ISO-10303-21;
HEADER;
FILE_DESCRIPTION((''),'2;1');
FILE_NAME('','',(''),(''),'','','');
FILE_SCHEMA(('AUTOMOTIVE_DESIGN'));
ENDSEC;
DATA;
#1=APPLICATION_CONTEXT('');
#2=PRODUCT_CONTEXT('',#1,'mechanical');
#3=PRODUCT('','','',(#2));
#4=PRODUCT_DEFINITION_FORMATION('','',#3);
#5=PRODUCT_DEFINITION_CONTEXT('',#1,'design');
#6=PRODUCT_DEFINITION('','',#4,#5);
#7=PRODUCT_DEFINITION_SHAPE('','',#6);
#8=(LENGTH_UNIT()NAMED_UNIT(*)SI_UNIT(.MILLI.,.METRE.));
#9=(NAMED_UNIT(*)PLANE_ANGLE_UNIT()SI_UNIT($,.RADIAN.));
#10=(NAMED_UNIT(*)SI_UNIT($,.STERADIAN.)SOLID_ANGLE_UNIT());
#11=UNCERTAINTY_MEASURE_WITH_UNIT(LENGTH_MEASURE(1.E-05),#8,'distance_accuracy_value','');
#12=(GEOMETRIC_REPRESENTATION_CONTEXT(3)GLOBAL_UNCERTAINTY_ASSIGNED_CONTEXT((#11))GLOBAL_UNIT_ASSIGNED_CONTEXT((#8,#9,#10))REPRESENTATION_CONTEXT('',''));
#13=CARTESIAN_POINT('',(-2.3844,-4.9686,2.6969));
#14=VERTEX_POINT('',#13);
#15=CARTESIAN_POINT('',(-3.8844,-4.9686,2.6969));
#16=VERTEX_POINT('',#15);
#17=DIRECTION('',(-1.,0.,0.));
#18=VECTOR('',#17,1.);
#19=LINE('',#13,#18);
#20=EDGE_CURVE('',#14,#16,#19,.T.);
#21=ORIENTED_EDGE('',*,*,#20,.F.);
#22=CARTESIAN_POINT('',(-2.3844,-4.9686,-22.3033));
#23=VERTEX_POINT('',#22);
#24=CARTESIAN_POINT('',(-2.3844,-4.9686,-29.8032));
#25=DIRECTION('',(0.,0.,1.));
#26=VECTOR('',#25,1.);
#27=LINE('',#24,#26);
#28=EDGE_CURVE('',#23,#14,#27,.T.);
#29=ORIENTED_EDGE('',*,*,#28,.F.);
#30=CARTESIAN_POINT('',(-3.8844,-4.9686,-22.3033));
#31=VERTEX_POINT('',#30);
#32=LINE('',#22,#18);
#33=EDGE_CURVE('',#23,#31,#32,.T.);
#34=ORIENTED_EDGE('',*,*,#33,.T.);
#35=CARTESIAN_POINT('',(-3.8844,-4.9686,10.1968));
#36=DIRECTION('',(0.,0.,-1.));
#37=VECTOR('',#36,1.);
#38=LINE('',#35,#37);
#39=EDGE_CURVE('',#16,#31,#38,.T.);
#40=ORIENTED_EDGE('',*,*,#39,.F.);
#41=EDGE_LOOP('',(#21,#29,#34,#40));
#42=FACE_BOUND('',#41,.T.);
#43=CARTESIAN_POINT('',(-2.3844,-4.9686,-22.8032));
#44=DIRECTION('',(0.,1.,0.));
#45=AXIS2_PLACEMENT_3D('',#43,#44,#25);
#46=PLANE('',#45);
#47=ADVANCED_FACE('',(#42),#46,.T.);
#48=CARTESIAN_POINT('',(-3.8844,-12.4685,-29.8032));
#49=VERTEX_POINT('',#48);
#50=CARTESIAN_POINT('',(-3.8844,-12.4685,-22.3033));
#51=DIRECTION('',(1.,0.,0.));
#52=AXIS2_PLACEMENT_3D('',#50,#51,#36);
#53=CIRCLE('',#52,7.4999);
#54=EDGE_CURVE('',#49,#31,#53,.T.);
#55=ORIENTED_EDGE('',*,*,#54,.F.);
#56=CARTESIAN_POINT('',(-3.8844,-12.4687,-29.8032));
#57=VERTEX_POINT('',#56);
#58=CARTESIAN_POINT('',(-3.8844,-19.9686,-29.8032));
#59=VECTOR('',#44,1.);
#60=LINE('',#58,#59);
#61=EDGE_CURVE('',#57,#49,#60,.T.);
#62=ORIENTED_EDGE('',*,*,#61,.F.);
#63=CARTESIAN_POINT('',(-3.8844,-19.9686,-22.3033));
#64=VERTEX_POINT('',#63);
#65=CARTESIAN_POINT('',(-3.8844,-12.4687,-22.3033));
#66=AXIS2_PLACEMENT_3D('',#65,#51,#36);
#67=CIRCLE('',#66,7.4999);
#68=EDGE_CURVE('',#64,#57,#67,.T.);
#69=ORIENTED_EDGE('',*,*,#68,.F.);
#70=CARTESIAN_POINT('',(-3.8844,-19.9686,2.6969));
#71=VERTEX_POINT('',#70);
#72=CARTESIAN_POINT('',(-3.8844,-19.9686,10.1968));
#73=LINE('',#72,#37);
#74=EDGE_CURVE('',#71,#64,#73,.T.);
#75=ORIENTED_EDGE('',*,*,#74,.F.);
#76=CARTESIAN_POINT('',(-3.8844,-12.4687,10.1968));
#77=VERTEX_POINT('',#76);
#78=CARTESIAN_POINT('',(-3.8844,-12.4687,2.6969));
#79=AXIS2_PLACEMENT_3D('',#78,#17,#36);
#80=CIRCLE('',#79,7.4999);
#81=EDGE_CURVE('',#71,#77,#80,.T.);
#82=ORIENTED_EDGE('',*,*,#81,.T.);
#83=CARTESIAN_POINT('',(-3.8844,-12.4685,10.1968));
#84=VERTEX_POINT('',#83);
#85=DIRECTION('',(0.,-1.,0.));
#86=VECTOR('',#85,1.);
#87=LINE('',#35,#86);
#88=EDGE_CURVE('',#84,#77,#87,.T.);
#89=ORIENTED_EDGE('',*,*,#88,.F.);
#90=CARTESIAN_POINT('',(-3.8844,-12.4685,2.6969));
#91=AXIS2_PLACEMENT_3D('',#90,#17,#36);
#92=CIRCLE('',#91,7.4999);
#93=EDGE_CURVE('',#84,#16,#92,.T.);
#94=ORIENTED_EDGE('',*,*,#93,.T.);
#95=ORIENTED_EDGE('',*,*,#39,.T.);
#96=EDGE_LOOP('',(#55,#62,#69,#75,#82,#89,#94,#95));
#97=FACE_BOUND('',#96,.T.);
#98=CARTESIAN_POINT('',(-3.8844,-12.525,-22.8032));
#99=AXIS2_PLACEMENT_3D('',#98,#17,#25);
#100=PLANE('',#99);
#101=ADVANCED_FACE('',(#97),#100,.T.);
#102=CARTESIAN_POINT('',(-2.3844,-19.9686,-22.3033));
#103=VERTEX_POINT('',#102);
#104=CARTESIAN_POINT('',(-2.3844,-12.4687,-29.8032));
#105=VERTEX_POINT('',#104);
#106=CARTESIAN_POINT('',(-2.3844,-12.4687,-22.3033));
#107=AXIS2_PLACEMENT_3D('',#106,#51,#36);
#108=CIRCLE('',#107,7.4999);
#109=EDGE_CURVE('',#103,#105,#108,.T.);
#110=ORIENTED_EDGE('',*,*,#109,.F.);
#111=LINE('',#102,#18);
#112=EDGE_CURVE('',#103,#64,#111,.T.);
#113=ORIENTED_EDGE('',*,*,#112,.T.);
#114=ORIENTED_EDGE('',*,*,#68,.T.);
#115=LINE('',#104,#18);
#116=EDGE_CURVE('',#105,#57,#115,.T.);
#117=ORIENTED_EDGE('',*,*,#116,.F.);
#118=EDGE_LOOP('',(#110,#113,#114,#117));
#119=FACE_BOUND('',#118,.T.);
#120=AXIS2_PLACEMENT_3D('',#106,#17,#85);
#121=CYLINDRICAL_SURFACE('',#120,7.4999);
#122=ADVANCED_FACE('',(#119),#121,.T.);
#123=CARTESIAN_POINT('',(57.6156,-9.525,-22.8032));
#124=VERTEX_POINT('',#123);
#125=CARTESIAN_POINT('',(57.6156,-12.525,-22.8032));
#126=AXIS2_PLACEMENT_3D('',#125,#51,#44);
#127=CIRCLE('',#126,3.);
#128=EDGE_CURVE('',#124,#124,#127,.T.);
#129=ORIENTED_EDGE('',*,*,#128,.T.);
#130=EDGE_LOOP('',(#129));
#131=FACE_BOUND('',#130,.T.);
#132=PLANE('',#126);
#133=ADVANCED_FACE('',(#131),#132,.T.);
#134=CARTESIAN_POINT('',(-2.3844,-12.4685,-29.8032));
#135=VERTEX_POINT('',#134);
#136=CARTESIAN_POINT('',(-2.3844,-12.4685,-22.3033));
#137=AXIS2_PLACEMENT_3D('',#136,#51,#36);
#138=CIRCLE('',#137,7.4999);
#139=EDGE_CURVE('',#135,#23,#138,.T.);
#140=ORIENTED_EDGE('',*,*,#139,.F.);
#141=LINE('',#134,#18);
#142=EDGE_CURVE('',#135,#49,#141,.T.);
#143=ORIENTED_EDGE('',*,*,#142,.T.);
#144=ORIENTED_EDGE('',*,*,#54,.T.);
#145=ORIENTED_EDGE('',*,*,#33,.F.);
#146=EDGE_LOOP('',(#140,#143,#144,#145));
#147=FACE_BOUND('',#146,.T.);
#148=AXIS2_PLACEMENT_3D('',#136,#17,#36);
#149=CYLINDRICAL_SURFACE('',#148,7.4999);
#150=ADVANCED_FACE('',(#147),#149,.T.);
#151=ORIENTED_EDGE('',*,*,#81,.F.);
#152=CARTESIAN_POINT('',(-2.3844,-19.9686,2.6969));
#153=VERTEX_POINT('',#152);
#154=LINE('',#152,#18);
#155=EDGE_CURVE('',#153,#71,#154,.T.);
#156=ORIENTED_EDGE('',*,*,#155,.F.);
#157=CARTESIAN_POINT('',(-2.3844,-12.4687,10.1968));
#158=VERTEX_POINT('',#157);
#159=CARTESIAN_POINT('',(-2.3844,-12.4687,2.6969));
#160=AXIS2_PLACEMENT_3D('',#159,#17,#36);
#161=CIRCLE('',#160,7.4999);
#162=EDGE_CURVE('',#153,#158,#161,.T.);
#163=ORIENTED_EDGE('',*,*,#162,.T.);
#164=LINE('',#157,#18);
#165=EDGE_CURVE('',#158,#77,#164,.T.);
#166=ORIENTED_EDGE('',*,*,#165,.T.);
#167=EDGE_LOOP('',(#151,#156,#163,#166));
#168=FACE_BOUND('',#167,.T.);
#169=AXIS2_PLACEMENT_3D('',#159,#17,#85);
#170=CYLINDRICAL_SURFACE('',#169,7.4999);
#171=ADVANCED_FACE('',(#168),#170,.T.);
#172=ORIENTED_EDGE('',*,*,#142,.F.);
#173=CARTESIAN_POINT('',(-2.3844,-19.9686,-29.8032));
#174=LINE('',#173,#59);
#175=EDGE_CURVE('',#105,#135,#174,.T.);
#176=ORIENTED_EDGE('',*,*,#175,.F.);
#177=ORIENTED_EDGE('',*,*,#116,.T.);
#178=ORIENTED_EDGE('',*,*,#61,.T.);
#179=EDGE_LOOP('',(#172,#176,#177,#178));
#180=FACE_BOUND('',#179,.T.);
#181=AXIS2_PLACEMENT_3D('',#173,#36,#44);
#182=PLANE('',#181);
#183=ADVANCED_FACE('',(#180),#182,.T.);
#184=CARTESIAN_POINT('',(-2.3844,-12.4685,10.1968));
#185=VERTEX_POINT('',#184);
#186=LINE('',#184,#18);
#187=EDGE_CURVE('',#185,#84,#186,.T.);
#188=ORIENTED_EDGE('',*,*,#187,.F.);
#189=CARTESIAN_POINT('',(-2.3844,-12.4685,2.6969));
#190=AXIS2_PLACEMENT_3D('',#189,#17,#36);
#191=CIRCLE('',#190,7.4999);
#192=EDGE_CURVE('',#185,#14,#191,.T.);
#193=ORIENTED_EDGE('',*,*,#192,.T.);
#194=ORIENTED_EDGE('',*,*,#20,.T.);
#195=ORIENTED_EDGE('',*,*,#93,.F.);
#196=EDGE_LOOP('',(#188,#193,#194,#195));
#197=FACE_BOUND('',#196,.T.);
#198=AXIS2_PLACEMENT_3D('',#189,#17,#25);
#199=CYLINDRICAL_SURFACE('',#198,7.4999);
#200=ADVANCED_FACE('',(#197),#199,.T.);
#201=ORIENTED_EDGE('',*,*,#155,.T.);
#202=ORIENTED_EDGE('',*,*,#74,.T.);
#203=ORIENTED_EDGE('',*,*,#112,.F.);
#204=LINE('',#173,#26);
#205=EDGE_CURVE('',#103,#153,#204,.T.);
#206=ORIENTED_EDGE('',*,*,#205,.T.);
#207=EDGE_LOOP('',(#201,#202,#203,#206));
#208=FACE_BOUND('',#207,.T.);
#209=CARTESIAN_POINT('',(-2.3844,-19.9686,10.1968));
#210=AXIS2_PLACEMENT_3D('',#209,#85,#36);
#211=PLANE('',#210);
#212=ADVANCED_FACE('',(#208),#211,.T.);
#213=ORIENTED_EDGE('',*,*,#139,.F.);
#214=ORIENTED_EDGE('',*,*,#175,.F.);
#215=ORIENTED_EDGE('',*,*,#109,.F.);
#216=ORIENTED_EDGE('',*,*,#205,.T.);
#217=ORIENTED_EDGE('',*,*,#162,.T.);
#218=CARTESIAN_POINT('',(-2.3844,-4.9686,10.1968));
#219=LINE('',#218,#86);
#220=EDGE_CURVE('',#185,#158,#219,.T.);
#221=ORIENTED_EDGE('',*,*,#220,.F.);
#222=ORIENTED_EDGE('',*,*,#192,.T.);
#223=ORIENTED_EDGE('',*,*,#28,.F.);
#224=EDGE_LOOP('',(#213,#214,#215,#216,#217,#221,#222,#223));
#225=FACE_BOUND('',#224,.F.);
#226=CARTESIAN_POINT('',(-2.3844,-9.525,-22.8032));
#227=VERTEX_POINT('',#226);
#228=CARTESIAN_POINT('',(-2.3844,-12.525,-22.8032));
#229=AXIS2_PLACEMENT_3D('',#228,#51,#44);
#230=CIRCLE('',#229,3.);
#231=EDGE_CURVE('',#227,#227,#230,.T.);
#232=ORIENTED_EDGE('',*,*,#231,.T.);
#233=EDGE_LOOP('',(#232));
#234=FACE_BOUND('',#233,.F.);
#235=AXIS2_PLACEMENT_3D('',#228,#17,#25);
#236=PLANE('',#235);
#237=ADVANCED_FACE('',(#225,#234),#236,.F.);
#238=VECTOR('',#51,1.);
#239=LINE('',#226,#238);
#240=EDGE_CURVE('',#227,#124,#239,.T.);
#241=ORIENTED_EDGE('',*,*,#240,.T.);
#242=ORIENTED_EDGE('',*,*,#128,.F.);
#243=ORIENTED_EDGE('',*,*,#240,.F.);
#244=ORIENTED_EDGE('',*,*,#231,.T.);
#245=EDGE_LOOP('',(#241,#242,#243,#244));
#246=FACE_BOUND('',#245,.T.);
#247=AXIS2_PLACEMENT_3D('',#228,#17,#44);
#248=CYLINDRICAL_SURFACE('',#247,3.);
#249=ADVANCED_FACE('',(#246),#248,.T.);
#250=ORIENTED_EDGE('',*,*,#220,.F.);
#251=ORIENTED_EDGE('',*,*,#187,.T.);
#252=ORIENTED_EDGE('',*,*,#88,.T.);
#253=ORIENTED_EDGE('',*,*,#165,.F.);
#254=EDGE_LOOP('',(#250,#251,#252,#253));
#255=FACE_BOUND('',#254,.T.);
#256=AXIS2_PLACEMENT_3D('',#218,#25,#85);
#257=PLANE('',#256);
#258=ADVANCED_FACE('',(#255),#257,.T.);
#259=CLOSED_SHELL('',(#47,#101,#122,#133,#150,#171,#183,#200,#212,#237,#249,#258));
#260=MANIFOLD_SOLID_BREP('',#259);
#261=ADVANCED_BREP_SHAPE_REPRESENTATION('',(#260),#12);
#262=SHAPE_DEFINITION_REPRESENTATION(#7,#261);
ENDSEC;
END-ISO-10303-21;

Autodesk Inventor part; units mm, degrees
ref_plane "YZ Plane" through (0, 0, 0) normal (1, 0, 0) x (0, 1, 0)
ref_plane "XZ Plane" through (0, 0, 0) normal (0, 1, 0) x (-1, 0, 0)
ref_plane "XY Plane" through (0, 0, 0) normal (0, 0, 1) x (1, 0, 0)
ref_plane "Płaszczyzna konstrukcyjna1" through (-2.3844, -12.525, -22.8032) normal (1, 0, 0) x (0, 1, 0)
sketch "Szkic1" plane through (-2.3844, -12.525, -22.8032) normal (1, 0, 0) x (0, 1, 0)
  circle A0 centre (0, 0) radius 3
  point P0 (12.525, 22.8032)
  dimension "d0" = 6
extrude "Wyciągnięcie proste1" add sketch "Szkic1" along normal blind 60
sketch "Szkic2" plane through (-2.3844, -12.525, -22.8032) normal (-1, 0, 0) x (0, 0, 1)
  line L0 (33, -7.4436) -> (-7, -7.4436)
  line L1 (-7, -7.4436) -> (-7, 7.5564)
  line L2 (-7, 7.5564) -> (33, 7.5564)
  line L3 (33, 7.5564) -> (33, -7.4436)
  line L4 (33, -7.4436) -> (-7, 7.5564) construction
  line L5 (-7, -7.4436) -> (33, 7.5564) construction
  line L6 (0, 16.5188) -> (0, -11.4374)
  circle A0 centre (0, 0) radius 3 projected
  point P0 (22.8032, 12.525)
  point P1 (13, 0.0564)
  dimension "d3" = 40
  dimension "d4" = 15
  dimension "d5" = 7
extrude "Wyciągnięcie proste2" add sketch "Szkic2" along normal blind 1.5
full round fillet "Zaokrąglenie1" first side at (-2.8844, -19.9687, -16.4698) centre faces at (-2.8844, -9.9687, -29.8032) second side at (-2.8844, -4.9687, -3.1365)
full round fillet "Zaokrąglenie2" first side at (-2.8844, -19.9687, -11.4699) centre faces at (-2.8844, -14.9687, 10.1968) second side at (-2.8844, -4.9687, -0.6365)
properties part number "uchwyt1" material "Aluminium 3004-O"
